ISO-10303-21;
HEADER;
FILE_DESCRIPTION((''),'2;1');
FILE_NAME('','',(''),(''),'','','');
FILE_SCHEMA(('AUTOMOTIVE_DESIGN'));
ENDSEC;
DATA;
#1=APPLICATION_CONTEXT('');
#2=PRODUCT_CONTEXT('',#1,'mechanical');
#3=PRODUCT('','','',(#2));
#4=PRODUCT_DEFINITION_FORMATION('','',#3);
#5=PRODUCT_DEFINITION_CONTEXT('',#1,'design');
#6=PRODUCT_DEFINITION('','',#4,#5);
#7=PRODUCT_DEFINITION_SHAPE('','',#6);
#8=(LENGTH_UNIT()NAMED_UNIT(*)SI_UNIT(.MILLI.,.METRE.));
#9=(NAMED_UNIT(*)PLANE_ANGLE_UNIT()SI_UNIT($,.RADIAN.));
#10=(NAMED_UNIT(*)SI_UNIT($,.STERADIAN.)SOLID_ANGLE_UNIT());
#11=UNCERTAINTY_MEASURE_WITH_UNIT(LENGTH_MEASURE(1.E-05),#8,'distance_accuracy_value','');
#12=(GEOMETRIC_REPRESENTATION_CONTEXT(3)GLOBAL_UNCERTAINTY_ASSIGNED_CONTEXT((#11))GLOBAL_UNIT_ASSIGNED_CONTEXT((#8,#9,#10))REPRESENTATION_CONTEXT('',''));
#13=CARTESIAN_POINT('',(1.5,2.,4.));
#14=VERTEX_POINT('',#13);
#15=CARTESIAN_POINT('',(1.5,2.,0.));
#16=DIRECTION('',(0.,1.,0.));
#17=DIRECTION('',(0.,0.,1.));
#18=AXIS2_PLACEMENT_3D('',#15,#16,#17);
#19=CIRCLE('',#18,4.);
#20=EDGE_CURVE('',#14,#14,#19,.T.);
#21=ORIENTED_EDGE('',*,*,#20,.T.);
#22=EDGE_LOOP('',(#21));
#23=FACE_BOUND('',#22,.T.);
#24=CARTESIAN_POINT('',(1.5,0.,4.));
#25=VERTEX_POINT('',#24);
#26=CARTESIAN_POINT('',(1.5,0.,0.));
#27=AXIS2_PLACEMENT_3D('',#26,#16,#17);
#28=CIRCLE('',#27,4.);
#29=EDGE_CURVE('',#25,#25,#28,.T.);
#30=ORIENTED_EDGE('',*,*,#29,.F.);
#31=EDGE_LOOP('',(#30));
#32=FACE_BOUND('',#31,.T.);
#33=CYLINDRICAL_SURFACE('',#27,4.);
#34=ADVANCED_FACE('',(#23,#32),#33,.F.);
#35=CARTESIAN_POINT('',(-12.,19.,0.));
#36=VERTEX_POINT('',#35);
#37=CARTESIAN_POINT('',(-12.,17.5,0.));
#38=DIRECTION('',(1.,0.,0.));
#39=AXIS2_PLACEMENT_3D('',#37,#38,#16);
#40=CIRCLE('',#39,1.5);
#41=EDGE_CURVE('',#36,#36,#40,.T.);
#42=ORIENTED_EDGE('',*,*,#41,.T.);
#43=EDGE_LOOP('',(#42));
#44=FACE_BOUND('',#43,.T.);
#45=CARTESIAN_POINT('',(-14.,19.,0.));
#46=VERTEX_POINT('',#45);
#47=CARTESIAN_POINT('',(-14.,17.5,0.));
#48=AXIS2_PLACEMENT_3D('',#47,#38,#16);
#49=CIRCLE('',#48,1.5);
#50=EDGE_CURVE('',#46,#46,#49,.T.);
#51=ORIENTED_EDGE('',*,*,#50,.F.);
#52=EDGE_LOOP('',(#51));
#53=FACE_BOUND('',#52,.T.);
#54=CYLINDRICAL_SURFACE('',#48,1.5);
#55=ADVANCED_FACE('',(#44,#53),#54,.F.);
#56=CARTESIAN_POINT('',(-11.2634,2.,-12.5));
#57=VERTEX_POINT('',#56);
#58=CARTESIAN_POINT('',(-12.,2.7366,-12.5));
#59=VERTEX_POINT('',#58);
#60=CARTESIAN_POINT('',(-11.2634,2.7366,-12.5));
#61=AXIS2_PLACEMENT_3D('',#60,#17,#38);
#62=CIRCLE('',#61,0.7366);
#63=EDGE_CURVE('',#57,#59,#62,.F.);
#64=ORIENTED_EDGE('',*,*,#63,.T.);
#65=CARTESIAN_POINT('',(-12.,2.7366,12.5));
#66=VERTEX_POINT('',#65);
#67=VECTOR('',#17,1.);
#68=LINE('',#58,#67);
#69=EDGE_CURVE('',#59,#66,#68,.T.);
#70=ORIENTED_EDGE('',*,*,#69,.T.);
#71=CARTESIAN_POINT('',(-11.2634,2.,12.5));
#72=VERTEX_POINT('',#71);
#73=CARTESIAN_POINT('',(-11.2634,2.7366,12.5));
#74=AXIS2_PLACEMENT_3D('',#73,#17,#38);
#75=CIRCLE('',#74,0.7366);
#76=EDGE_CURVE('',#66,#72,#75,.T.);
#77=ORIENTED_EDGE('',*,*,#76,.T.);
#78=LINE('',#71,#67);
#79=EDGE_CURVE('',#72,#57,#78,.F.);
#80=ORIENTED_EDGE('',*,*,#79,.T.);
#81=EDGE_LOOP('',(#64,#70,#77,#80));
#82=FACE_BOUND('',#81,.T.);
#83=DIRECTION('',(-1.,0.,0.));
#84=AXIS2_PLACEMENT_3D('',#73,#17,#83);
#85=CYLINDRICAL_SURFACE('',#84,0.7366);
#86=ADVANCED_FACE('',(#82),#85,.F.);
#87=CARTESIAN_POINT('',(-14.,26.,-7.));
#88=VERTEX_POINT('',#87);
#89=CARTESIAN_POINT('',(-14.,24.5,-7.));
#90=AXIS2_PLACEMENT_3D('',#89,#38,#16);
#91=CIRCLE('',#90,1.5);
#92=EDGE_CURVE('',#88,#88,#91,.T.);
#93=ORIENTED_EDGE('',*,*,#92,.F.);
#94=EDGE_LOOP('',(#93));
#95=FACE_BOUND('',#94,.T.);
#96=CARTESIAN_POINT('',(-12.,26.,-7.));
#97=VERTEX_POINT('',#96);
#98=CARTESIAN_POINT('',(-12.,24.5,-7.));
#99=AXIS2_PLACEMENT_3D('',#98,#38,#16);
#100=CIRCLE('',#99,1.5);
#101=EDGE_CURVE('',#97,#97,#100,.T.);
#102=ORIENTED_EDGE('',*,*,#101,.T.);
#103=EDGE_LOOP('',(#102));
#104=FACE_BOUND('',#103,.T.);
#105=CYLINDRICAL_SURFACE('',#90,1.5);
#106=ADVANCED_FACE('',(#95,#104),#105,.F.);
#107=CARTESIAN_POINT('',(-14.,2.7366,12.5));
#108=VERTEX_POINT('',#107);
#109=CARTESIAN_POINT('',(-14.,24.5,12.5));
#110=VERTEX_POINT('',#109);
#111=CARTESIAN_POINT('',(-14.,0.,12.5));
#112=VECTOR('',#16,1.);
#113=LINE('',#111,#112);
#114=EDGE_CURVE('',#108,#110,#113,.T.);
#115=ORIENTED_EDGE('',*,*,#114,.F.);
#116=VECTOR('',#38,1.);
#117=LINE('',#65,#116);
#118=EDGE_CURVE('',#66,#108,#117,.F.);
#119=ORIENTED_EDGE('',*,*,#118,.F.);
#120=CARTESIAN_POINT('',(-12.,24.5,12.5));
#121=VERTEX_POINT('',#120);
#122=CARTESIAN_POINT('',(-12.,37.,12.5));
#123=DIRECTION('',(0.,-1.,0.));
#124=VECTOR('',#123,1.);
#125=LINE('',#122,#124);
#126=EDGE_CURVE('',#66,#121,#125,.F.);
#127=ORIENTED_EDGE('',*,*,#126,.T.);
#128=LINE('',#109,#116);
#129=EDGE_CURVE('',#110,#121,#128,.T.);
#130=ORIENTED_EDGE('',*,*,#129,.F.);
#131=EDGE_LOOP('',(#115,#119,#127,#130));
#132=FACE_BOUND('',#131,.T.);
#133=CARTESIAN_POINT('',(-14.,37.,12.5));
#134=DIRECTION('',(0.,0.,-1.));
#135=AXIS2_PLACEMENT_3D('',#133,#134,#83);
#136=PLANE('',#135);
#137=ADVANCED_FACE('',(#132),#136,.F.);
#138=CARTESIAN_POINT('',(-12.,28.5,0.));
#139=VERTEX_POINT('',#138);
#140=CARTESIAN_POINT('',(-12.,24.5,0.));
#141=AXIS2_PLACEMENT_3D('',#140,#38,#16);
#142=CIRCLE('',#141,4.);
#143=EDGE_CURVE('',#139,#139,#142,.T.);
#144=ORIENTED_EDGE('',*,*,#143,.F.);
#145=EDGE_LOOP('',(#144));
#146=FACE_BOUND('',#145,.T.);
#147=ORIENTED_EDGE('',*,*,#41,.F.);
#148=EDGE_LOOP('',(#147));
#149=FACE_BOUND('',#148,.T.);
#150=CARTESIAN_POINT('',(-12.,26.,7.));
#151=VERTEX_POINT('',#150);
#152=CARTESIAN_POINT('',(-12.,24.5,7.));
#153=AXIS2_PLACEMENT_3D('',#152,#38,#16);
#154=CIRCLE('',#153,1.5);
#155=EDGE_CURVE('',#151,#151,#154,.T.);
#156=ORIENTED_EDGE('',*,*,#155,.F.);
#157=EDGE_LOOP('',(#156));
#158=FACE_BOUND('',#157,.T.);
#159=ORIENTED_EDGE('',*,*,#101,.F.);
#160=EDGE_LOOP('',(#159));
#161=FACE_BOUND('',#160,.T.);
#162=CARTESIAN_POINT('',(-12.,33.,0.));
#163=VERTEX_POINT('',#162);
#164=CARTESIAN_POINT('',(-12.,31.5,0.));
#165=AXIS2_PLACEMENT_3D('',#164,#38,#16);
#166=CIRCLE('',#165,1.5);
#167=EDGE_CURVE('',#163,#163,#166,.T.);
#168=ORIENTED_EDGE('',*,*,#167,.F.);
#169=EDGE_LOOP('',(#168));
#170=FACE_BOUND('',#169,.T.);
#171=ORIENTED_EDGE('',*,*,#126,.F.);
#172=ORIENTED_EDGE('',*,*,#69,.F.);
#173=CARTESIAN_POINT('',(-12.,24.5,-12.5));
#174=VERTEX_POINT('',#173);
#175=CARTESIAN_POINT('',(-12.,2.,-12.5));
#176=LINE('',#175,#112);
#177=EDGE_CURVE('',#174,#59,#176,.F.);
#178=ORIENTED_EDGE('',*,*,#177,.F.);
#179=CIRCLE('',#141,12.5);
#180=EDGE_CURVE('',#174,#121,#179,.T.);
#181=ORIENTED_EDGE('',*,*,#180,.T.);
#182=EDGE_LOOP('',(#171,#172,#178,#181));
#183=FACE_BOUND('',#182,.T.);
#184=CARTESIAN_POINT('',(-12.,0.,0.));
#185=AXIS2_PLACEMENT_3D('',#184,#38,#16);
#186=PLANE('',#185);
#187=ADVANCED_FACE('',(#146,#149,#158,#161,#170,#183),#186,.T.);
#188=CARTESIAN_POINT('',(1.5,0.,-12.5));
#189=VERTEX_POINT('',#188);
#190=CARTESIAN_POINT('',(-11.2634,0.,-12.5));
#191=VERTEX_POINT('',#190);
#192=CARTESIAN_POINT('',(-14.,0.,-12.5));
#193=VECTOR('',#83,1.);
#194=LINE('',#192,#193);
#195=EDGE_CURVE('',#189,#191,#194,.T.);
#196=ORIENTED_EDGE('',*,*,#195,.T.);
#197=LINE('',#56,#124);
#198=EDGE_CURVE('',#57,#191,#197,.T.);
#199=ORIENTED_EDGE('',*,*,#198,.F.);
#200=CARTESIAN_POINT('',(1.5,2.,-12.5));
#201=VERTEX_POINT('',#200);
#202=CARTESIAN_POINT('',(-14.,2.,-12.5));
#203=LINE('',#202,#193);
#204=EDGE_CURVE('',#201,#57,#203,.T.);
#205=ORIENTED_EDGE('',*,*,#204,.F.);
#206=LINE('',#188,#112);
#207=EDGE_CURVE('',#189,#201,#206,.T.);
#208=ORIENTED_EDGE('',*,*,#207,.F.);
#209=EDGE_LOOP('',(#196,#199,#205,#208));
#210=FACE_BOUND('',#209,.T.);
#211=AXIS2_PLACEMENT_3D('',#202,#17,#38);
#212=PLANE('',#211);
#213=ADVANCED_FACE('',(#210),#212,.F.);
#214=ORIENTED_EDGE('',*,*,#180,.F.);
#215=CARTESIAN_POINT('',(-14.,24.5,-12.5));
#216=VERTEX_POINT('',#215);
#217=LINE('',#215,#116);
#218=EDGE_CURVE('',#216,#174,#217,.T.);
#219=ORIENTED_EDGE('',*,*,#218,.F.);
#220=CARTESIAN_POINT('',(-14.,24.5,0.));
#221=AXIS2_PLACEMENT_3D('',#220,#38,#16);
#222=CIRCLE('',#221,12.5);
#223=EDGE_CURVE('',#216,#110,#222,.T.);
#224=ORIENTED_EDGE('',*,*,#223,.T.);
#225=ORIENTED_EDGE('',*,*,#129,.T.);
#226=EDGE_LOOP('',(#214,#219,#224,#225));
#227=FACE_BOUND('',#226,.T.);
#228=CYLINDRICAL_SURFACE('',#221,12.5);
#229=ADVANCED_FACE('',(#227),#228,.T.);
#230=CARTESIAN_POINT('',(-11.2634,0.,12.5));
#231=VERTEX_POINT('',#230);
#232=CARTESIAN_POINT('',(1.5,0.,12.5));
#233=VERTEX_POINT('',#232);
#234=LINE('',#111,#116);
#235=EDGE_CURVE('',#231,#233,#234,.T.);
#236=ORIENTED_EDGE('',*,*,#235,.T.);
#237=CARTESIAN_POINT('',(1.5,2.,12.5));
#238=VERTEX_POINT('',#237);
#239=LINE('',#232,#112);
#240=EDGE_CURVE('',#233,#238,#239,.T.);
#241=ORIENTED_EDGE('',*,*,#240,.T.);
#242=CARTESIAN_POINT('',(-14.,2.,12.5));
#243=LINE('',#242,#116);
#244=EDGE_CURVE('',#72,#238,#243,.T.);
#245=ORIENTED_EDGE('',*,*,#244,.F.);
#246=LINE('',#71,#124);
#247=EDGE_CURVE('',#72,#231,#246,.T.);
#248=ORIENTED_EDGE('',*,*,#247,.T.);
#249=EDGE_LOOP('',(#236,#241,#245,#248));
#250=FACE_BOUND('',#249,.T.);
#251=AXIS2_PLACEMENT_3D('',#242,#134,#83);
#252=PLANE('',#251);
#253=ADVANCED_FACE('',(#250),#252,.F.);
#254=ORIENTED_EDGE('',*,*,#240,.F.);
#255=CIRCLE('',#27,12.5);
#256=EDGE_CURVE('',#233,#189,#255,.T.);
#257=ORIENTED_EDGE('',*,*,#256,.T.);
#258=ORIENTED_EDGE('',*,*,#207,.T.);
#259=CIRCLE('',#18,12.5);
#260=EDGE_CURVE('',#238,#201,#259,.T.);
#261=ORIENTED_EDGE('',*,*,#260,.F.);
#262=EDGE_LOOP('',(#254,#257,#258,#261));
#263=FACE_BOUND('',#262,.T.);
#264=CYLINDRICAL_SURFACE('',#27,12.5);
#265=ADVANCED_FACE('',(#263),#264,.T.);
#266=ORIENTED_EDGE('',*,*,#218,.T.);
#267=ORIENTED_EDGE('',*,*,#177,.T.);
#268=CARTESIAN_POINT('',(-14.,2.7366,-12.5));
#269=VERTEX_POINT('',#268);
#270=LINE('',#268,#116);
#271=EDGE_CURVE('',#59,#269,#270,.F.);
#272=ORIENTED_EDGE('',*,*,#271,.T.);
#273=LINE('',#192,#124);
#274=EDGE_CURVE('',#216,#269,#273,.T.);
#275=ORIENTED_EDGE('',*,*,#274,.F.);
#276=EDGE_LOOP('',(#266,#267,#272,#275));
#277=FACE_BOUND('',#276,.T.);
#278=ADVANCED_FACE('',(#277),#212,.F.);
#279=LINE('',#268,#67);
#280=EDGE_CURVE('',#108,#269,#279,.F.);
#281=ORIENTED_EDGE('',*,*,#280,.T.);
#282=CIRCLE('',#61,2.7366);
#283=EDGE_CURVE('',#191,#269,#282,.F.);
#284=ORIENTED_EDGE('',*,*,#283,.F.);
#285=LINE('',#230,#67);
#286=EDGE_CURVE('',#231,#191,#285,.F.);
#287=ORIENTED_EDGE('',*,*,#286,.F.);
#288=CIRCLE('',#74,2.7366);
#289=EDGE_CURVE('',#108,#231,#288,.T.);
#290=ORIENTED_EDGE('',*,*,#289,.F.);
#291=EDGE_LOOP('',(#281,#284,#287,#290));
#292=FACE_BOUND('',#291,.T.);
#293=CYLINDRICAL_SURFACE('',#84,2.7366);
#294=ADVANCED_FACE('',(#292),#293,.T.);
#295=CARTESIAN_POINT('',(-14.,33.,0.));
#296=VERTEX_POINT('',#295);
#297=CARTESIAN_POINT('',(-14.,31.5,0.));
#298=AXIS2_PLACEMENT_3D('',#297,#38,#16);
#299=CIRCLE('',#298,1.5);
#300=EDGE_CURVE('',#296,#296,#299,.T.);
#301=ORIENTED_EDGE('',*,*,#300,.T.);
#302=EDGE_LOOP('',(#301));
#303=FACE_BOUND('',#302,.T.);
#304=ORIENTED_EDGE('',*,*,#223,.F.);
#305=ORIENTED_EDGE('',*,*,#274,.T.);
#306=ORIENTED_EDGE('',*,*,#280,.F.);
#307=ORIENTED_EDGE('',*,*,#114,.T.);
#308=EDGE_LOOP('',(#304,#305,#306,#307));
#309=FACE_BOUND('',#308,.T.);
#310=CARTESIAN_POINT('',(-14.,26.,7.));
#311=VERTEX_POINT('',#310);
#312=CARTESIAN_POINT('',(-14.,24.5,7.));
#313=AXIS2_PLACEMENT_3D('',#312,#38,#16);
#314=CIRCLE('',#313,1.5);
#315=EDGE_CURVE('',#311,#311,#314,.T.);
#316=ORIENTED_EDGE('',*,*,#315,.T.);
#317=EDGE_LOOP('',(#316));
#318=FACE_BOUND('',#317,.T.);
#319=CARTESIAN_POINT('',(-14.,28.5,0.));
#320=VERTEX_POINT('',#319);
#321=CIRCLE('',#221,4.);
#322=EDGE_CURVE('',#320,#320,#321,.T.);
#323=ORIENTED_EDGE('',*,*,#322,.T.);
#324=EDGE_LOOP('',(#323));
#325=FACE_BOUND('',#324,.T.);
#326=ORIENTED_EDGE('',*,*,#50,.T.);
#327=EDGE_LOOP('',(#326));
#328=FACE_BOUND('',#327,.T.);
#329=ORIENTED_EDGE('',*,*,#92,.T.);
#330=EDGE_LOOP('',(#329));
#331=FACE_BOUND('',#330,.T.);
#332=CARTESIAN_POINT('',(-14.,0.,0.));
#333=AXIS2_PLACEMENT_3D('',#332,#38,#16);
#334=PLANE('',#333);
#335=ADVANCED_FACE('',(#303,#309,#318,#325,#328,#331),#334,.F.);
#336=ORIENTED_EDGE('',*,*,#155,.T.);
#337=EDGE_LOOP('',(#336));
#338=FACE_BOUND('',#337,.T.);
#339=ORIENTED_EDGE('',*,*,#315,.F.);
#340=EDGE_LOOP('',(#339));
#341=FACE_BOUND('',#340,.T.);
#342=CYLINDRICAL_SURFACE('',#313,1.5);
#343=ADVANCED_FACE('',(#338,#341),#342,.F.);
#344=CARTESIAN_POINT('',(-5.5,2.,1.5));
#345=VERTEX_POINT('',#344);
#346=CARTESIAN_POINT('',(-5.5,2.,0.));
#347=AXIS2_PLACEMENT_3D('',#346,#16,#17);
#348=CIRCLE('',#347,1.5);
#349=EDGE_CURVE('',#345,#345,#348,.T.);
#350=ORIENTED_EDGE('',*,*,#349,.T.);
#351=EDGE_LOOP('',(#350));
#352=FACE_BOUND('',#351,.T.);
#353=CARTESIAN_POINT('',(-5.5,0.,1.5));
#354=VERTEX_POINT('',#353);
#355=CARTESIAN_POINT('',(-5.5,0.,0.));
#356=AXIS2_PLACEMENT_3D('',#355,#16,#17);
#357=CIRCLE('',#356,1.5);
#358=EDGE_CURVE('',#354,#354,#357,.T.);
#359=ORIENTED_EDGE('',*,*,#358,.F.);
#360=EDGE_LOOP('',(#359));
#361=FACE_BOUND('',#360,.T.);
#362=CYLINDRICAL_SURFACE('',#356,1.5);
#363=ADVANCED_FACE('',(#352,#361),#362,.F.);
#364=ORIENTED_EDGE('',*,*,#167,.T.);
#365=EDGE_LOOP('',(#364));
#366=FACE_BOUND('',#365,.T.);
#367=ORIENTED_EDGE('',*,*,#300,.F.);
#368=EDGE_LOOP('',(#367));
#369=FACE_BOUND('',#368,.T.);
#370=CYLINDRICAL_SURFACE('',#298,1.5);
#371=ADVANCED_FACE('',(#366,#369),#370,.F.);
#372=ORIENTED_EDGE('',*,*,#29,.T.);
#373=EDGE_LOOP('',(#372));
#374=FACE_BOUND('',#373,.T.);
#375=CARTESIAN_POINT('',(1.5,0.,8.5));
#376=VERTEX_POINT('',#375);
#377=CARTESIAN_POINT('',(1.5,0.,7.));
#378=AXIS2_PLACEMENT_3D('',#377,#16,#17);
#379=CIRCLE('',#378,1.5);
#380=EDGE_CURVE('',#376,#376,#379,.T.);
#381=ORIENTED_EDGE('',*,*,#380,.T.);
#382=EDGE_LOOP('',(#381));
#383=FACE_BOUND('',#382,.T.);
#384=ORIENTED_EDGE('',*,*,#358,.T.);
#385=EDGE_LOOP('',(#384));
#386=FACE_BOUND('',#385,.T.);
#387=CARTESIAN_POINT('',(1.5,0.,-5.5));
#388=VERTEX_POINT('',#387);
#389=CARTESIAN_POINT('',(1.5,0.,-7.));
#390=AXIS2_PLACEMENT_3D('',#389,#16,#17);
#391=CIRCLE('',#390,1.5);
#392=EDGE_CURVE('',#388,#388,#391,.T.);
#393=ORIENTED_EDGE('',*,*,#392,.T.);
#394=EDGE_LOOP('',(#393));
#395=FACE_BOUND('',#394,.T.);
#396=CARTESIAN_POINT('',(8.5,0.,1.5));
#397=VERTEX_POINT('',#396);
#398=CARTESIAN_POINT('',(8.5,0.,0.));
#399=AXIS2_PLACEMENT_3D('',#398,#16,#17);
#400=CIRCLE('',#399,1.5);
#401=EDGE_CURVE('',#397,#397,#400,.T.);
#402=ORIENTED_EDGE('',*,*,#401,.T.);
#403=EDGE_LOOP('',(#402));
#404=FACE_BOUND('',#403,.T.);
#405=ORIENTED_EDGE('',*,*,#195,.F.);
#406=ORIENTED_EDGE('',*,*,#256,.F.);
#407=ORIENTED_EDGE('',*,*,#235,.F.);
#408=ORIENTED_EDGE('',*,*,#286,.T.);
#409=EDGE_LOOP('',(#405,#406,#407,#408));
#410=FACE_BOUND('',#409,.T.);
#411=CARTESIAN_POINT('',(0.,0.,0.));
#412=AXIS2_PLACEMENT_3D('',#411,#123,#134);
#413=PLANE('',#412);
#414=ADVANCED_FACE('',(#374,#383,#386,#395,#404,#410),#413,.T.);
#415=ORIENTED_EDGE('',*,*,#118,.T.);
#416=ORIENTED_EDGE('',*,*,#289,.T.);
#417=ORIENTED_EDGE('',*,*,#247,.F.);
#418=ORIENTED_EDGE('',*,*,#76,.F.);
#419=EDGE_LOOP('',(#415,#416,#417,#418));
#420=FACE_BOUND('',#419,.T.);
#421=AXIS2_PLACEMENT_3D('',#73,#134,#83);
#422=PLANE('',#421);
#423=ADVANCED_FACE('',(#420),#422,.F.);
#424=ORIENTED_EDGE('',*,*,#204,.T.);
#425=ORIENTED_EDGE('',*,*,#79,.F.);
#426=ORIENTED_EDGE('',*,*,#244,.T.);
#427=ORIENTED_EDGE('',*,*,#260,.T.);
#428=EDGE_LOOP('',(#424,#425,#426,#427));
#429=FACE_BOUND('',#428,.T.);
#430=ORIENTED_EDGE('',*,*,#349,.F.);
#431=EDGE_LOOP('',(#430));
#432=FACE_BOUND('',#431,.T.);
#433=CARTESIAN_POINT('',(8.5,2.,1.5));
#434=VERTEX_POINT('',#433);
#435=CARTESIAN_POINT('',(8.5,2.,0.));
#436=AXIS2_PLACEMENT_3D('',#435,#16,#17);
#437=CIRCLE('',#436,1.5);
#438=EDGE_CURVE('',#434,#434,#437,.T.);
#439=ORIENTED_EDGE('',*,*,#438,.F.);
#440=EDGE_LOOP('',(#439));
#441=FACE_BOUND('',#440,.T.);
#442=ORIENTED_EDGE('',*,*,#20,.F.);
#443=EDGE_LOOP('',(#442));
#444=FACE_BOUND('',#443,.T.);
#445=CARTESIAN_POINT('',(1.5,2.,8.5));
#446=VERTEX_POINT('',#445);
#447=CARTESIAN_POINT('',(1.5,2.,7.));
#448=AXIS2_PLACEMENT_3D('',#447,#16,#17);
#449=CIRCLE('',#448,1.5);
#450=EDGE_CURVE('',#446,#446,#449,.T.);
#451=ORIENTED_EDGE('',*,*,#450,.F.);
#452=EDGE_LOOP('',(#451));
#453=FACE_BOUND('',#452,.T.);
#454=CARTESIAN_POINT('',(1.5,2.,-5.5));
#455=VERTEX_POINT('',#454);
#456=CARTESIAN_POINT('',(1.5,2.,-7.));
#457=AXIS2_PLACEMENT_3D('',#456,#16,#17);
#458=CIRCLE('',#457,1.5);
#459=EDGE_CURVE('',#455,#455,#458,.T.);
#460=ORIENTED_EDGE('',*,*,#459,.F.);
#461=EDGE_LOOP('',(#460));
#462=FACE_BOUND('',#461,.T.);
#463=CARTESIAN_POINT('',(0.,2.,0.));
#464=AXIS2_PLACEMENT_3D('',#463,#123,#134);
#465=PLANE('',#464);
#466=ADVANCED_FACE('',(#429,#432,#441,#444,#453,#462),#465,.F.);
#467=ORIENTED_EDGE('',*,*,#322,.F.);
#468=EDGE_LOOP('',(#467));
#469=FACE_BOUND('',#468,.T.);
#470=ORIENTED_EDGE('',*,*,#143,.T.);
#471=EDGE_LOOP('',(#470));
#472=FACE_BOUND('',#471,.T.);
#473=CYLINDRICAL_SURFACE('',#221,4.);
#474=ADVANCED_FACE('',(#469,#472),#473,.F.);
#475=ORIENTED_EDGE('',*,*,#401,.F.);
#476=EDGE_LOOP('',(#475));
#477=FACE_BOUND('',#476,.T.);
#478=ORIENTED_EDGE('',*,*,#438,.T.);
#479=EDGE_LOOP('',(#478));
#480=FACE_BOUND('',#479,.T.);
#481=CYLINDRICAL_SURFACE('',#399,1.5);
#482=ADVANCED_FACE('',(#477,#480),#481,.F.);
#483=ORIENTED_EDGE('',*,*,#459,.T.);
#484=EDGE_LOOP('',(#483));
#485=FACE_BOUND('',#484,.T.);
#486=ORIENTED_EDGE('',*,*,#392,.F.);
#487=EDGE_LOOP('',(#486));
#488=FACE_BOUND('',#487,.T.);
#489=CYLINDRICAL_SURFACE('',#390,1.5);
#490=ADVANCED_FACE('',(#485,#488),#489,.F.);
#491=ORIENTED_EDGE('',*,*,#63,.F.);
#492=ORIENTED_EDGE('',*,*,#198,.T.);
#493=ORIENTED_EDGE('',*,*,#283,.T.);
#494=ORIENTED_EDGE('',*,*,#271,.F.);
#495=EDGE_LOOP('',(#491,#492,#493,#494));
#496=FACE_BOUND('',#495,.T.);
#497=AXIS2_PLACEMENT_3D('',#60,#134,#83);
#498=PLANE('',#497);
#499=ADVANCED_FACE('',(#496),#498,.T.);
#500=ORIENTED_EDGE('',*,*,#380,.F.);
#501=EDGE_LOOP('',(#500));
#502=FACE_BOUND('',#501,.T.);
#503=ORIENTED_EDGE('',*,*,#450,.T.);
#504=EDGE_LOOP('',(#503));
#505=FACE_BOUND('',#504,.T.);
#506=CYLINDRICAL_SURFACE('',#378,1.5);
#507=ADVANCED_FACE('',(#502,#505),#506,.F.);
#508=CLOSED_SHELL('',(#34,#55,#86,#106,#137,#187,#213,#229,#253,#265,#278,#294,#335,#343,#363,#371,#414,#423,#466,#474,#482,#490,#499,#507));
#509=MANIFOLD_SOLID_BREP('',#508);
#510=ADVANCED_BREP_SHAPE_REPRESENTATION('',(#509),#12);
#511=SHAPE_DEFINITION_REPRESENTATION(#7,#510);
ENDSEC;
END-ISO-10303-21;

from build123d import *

# Parameters (mm, degrees)
SCHIZZO1_W                     = 28
SCHIZZO1_H                     = 25
BASE_FLANGIA1_DEPTH            = 2
BORDO_FLANGIA1_STRIP_W         = 9.4732
BORDO_FLANGIA1_STRIP_H         = 2
BORDO_FLANGIA1_STRIP_CUT_DEPTH = 25
BORDO_FLANGIA1_DEPTH           = 25
SCHIZZO3_R                     = 4
SCHIZZO3_R_2                   = 1.5
TAGLIO_ESTRUSIONE1_DEPTH       = 40.714606885
SCHIZZO4_R                     = 1.5
SCHIZZO4_R_2                   = 4
TAGLIO_ESTRUSIONE2_DEPTH       = 47.917480751


# Sheet-metal steps are written as plain solids
with BuildPart() as part:
    # Schizzo1 → Base-Flangia1 (new body)
    with BuildSketch(Plane(origin=(0, 0, 0), x_dir=(1, 0, 0), z_dir=(0, 1, 0))):
        Rectangle(SCHIZZO1_W, SCHIZZO1_H)
    extrude(amount=BASE_FLANGIA1_DEPTH)

    # Bordo-Flangia1 strip (across the edge) → Bordo-Flangia1 strip cut (cut)
    with BuildSketch(Plane(origin=(-14, 2, -12.5), x_dir=(1, 0, 0), z_dir=(0, 0, 1))):
        with Locations((-2, -1)):
            Rectangle(BORDO_FLANGIA1_STRIP_W, BORDO_FLANGIA1_STRIP_H)
    extrude(amount=BORDO_FLANGIA1_STRIP_CUT_DEPTH, mode=Mode.SUBTRACT)

    # Bordo-Flangia1 section (across the edge) → Bordo-Flangia1 (add)
    with BuildSketch(Plane(origin=(-14, 2, -12.5), x_dir=(1, 0, 0), z_dir=(0, 0, 1))):
        with BuildLine():
            Line((0, 0.7366), (0, 35))
            Line((0, 35), (2, 35))
            Line((2, 35), (2, 0.7366))
            ThreePointArc((2, 0.7366), (2.215745145, 0.215745145), (2.7366, 0))
            Line((2.7366, 0), (2.7366, -2))
            ThreePointArc((2.7366, -2), (0.801531583, -1.198468417), (0, 0.7366))
        make_face()
    extrude(amount=BORDO_FLANGIA1_DEPTH)

    # Schizzo3 → Taglio-Estrusione1 (cut, through all)
    with BuildSketch(Plane(origin=(0, 2, 0), x_dir=(1, 0, 0), z_dir=(0, 1, 0))):
        with Locations(Location((1.5, 0, 0), (0, 0, 270))):
            Circle(SCHIZZO3_R)
        with Locations(Location((1.5, 7, 0), (0, 0, 270))):
            Circle(SCHIZZO3_R_2)
        with Locations(Location((-5.5, 0, 0), (0, 0, 270))):
            Circle(SCHIZZO3_R_2)
        with Locations(Location((1.5, -7, 0), (0, 0, 270))):
            Circle(SCHIZZO3_R_2)
        with Locations(Location((8.5, 0, 0), (0, 0, 270))):
            Circle(SCHIZZO3_R_2)
        with BuildLine():
            ThreePointArc((1.5, 12.5), (10.338834766, 8.838834764), (14, -3e-09))
            Line((14, -3e-09), (14, 12.5))
            Line((14, 12.5), (1.5, 12.5))
        make_face()
        with BuildLine():
            ThreePointArc((14, -3e-09), (10.338834764, -8.838834766), (1.5, -12.5))
            Line((1.5, -12.5), (14, -12.5))
            Line((14, -12.5), (14, -3e-09))
        make_face()
    extrude(amount=-TAGLIO_ESTRUSIONE1_DEPTH, mode=Mode.SUBTRACT)

    # Schizzo4 → Taglio-Estrusione2 (cut, through all)
    with BuildSketch(Plane(origin=(-12, 0, 0), x_dir=(0, 0, -1), z_dir=(1, 0, 0))):
        with BuildLine():
            Line((12.5, 24.5), (12.5, 37))
            Line((12.5, 37), (3.9e-08, 37))
            ThreePointArc((3.9e-08, 37), (8.838834779, 33.338834751), (12.5, 24.5))
        make_face()
        with BuildLine():
            ThreePointArc((-12.5, 24.5), (-8.838834751, 33.338834779), (3.9e-08, 37))
            Line((3.9e-08, 37), (-12.5, 37))
            Line((-12.5, 37), (-12.5, 24.5))
        make_face()
        with Locations(Location((0, 31.5, 0), (0, 0, 90))):
            Circle(SCHIZZO4_R)
        with Locations(Location((0, 24.5, 0), (0, 0, 90))):
            Circle(SCHIZZO4_R_2)
        with Locations(Location((7, 24.5, 0), (0, 0, 90))):
            Circle(SCHIZZO4_R)
        with Locations(Location((0, 17.5, 0), (0, 0, 90))):
            Circle(SCHIZZO4_R)
        with Locations(Location((-7, 24.5, 0), (0, 0, 90))):
            Circle(SCHIZZO4_R)
    extrude(amount=-TAGLIO_ESTRUSIONE2_DEPTH, mode=Mode.SUBTRACT)


solid = part.part
